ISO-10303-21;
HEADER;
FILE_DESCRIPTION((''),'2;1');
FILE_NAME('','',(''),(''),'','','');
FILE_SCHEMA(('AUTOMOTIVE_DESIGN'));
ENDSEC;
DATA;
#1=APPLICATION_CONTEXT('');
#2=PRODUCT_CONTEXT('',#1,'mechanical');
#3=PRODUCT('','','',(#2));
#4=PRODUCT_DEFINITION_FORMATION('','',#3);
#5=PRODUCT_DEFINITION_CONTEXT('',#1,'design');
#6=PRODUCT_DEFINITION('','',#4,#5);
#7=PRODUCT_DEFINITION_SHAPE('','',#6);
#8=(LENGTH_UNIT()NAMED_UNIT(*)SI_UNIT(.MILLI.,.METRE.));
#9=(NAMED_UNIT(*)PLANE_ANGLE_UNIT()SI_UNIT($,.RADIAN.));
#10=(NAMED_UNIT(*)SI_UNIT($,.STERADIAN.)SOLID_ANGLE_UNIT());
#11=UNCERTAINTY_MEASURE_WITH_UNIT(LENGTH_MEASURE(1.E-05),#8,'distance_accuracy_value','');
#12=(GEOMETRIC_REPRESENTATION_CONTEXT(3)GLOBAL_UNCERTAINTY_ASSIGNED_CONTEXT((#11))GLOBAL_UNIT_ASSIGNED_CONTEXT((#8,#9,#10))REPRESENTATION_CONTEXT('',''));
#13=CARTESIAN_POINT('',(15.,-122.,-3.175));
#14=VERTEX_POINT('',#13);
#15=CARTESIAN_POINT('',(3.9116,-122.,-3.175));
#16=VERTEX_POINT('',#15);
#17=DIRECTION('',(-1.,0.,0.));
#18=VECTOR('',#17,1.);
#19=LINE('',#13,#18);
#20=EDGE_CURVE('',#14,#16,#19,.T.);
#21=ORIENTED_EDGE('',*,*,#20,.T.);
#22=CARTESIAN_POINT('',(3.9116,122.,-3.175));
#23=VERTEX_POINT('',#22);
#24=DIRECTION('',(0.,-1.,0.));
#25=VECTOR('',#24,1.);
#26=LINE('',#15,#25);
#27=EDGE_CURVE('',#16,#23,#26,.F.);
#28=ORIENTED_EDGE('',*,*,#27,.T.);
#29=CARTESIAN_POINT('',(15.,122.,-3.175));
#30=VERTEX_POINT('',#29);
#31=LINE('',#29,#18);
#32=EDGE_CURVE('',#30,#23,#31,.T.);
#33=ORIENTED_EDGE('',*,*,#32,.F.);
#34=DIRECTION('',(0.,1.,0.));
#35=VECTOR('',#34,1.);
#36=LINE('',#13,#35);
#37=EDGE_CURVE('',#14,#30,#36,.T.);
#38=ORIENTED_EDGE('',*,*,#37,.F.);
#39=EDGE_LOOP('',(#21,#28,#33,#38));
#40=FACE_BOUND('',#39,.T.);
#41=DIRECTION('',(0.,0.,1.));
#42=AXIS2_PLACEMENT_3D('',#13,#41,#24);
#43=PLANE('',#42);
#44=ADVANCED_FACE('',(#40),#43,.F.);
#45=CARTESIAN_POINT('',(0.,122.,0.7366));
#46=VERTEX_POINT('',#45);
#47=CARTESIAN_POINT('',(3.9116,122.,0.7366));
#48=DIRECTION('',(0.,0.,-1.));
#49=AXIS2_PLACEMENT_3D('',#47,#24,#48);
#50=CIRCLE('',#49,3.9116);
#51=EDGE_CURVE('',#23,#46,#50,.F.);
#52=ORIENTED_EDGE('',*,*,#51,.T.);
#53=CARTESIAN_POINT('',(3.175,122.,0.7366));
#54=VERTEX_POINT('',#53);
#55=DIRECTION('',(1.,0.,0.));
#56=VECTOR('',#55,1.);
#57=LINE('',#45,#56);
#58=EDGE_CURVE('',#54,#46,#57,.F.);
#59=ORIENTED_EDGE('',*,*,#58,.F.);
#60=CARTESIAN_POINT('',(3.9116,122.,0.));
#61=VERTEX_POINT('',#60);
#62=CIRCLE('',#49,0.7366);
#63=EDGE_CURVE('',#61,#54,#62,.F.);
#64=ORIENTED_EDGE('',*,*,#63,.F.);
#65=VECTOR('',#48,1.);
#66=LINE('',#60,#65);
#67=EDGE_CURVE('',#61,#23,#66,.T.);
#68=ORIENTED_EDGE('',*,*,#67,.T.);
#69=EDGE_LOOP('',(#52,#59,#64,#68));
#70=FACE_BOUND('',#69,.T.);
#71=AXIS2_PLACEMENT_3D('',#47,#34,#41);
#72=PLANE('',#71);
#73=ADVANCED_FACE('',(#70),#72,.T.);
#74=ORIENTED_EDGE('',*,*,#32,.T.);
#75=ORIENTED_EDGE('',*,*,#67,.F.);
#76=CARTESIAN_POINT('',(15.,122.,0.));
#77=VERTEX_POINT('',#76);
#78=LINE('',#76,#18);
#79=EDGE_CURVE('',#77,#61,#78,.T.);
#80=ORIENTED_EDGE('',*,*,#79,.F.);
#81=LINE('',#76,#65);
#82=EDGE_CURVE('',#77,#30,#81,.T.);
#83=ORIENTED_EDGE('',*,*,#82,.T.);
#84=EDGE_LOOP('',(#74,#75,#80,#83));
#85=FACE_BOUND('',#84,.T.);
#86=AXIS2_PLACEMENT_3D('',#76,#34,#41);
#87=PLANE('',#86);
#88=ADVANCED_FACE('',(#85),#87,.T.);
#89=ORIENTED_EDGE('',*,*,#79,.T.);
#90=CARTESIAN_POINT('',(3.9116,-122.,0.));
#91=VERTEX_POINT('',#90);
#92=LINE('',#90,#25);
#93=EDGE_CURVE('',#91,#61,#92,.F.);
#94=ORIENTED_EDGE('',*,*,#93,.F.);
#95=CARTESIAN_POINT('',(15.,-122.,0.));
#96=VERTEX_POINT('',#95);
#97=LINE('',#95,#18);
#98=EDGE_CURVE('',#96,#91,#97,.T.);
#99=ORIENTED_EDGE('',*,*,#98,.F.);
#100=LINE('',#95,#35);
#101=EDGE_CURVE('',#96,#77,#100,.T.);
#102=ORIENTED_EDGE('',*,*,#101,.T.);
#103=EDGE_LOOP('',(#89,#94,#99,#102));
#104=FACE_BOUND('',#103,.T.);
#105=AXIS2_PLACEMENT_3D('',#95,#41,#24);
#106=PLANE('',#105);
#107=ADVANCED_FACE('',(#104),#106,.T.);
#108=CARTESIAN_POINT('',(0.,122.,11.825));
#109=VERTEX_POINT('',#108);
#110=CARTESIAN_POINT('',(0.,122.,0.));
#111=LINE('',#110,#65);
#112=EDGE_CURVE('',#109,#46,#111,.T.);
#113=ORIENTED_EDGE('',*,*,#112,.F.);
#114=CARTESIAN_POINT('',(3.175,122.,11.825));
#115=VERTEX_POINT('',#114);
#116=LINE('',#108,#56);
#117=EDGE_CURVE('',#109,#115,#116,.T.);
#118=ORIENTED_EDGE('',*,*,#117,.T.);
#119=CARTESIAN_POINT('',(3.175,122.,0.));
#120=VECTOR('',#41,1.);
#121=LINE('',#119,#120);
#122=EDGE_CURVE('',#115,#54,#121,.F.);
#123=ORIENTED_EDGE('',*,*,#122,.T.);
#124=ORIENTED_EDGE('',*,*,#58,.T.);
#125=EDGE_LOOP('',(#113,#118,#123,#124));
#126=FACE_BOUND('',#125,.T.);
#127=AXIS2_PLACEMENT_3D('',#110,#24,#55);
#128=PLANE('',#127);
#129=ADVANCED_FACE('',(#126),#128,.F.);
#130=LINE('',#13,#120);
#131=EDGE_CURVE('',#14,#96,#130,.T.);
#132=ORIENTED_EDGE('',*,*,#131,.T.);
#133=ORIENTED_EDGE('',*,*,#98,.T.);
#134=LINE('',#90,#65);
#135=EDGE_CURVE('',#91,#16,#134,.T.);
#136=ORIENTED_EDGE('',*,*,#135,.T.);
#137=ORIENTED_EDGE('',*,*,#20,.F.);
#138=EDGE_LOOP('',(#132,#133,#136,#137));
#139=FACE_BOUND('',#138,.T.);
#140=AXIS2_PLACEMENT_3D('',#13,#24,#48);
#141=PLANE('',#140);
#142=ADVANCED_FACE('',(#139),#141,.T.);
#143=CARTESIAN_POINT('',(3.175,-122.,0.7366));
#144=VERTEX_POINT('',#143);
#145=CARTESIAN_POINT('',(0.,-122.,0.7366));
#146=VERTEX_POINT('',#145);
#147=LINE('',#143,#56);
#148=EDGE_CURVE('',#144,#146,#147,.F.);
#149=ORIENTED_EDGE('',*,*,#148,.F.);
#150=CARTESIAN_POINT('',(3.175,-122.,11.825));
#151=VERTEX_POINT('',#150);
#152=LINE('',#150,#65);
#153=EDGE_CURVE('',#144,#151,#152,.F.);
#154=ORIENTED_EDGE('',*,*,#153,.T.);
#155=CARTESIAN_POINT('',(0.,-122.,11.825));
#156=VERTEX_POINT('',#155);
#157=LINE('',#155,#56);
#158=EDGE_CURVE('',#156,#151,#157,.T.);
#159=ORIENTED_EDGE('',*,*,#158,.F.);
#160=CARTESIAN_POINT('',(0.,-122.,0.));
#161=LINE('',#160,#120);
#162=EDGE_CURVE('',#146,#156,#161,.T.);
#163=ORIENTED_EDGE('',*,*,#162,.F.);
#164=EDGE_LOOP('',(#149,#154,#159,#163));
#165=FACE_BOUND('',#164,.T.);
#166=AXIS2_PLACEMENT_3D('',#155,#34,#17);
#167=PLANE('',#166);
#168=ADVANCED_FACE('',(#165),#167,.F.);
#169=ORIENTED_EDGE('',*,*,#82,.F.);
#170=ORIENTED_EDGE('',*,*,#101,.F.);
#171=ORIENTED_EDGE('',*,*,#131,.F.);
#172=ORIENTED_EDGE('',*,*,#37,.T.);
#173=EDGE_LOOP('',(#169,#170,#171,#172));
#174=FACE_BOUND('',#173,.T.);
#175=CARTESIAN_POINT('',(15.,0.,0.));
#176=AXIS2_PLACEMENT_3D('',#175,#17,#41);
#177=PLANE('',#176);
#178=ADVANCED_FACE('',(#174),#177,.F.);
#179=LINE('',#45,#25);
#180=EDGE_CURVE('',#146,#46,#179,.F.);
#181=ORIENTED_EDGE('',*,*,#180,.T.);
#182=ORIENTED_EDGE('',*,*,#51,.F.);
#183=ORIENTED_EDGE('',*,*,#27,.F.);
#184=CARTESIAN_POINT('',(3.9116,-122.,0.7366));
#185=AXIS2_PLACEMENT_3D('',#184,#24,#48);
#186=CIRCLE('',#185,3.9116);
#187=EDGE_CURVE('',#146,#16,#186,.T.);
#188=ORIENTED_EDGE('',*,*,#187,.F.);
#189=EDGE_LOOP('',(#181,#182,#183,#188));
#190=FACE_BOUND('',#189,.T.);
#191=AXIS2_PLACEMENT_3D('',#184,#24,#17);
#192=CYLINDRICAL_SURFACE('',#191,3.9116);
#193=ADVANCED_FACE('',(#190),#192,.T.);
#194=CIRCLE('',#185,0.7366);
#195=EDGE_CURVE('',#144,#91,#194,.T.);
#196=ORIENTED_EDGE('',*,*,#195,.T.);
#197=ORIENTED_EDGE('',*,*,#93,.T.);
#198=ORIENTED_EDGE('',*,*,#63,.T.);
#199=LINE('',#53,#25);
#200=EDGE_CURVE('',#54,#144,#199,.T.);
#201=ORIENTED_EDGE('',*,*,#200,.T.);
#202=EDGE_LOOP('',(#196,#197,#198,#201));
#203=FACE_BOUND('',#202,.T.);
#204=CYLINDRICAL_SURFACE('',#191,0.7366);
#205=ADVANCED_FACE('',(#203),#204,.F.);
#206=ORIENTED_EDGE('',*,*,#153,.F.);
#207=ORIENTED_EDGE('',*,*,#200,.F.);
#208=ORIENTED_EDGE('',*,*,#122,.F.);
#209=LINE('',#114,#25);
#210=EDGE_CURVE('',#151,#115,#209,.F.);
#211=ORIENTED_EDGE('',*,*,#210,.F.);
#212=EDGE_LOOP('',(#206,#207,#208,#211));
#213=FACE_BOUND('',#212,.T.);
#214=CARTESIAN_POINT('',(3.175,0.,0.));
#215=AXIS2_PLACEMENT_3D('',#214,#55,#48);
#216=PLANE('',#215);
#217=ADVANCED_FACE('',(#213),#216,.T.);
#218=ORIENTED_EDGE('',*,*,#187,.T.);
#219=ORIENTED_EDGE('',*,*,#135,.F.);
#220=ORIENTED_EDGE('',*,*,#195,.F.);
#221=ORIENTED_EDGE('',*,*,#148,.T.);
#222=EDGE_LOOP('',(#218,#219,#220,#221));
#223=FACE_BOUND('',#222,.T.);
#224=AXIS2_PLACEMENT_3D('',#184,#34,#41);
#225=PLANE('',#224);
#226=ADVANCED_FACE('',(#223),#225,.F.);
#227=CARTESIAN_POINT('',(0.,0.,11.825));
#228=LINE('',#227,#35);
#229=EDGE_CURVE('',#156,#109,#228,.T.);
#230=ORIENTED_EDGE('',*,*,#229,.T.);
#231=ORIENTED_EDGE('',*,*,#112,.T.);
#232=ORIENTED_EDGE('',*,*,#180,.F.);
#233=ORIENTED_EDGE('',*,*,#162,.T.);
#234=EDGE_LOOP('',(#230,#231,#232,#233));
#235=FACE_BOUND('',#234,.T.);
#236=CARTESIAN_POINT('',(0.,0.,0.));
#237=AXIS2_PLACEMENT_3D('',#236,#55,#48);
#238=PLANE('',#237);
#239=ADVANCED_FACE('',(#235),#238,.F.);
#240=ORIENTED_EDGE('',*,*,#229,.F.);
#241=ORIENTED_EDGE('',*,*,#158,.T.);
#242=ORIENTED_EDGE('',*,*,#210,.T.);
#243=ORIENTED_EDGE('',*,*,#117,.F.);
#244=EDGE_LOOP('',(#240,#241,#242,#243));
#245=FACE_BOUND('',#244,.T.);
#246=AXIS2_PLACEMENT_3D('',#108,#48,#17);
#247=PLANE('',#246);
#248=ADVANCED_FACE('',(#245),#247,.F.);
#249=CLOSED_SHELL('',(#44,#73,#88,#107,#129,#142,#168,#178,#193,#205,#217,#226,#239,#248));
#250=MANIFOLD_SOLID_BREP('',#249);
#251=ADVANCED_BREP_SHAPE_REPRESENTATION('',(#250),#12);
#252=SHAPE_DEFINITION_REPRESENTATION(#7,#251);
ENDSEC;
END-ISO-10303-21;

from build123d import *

# Parameters (mm, degrees)
SKETCH1_W                    = 3.175
SKETCH1_H                    = 244
BASE_FLANGE1_DEPTH           = 15
EDGE_FLANGE1_STRIP_W         = 14.1732
EDGE_FLANGE1_STRIP_H         = 3.175
EDGE_FLANGE1_STRIP_CUT_DEPTH = 244
EDGE_FLANGE1_DEPTH           = 244


# Sheet-metal steps are written as plain solids
with BuildPart() as part:
    # Sketch1 → Base-Flange1 (new body)
    with BuildSketch(Plane(origin=(0, 0, 0), x_dir=(0, 0, -1), z_dir=(1, 0, 0))):
        with Locations((1.5875, 0)):
            Rectangle(SKETCH1_W, SKETCH1_H)
    extrude(amount=BASE_FLANGE1_DEPTH)

    # Edge-Flange1 strip (across the edge) → Edge-Flange1 strip cut (cut)
    with BuildSketch(Plane.XZ.offset(-122)):
        with Locations((-3.175, -1.5875)):
            Rectangle(EDGE_FLANGE1_STRIP_W, EDGE_FLANGE1_STRIP_H)
    extrude(amount=EDGE_FLANGE1_STRIP_CUT_DEPTH, mode=Mode.SUBTRACT)

    # Edge-Flange1 section (across the edge) → Edge-Flange1 (add)
    with BuildSketch(Plane.XZ.offset(-122)):
        with BuildLine():
            Line((0, 0.7366), (0, 11.825))
            Line((0, 11.825), (3.175, 11.825))
            Line((3.175, 11.825), (3.175, 0.7366))
            ThreePointArc((3.175, 0.7366), (3.390745145, 0.215745145), (3.9116, 0))
            Line((3.9116, 0), (3.9116, -3.175))
            ThreePointArc((3.9116, -3.175), (1.145681115, -2.029318885), (0, 0.7366))
        make_face()
    extrude(amount=EDGE_FLANGE1_DEPTH)


solid = part.part
